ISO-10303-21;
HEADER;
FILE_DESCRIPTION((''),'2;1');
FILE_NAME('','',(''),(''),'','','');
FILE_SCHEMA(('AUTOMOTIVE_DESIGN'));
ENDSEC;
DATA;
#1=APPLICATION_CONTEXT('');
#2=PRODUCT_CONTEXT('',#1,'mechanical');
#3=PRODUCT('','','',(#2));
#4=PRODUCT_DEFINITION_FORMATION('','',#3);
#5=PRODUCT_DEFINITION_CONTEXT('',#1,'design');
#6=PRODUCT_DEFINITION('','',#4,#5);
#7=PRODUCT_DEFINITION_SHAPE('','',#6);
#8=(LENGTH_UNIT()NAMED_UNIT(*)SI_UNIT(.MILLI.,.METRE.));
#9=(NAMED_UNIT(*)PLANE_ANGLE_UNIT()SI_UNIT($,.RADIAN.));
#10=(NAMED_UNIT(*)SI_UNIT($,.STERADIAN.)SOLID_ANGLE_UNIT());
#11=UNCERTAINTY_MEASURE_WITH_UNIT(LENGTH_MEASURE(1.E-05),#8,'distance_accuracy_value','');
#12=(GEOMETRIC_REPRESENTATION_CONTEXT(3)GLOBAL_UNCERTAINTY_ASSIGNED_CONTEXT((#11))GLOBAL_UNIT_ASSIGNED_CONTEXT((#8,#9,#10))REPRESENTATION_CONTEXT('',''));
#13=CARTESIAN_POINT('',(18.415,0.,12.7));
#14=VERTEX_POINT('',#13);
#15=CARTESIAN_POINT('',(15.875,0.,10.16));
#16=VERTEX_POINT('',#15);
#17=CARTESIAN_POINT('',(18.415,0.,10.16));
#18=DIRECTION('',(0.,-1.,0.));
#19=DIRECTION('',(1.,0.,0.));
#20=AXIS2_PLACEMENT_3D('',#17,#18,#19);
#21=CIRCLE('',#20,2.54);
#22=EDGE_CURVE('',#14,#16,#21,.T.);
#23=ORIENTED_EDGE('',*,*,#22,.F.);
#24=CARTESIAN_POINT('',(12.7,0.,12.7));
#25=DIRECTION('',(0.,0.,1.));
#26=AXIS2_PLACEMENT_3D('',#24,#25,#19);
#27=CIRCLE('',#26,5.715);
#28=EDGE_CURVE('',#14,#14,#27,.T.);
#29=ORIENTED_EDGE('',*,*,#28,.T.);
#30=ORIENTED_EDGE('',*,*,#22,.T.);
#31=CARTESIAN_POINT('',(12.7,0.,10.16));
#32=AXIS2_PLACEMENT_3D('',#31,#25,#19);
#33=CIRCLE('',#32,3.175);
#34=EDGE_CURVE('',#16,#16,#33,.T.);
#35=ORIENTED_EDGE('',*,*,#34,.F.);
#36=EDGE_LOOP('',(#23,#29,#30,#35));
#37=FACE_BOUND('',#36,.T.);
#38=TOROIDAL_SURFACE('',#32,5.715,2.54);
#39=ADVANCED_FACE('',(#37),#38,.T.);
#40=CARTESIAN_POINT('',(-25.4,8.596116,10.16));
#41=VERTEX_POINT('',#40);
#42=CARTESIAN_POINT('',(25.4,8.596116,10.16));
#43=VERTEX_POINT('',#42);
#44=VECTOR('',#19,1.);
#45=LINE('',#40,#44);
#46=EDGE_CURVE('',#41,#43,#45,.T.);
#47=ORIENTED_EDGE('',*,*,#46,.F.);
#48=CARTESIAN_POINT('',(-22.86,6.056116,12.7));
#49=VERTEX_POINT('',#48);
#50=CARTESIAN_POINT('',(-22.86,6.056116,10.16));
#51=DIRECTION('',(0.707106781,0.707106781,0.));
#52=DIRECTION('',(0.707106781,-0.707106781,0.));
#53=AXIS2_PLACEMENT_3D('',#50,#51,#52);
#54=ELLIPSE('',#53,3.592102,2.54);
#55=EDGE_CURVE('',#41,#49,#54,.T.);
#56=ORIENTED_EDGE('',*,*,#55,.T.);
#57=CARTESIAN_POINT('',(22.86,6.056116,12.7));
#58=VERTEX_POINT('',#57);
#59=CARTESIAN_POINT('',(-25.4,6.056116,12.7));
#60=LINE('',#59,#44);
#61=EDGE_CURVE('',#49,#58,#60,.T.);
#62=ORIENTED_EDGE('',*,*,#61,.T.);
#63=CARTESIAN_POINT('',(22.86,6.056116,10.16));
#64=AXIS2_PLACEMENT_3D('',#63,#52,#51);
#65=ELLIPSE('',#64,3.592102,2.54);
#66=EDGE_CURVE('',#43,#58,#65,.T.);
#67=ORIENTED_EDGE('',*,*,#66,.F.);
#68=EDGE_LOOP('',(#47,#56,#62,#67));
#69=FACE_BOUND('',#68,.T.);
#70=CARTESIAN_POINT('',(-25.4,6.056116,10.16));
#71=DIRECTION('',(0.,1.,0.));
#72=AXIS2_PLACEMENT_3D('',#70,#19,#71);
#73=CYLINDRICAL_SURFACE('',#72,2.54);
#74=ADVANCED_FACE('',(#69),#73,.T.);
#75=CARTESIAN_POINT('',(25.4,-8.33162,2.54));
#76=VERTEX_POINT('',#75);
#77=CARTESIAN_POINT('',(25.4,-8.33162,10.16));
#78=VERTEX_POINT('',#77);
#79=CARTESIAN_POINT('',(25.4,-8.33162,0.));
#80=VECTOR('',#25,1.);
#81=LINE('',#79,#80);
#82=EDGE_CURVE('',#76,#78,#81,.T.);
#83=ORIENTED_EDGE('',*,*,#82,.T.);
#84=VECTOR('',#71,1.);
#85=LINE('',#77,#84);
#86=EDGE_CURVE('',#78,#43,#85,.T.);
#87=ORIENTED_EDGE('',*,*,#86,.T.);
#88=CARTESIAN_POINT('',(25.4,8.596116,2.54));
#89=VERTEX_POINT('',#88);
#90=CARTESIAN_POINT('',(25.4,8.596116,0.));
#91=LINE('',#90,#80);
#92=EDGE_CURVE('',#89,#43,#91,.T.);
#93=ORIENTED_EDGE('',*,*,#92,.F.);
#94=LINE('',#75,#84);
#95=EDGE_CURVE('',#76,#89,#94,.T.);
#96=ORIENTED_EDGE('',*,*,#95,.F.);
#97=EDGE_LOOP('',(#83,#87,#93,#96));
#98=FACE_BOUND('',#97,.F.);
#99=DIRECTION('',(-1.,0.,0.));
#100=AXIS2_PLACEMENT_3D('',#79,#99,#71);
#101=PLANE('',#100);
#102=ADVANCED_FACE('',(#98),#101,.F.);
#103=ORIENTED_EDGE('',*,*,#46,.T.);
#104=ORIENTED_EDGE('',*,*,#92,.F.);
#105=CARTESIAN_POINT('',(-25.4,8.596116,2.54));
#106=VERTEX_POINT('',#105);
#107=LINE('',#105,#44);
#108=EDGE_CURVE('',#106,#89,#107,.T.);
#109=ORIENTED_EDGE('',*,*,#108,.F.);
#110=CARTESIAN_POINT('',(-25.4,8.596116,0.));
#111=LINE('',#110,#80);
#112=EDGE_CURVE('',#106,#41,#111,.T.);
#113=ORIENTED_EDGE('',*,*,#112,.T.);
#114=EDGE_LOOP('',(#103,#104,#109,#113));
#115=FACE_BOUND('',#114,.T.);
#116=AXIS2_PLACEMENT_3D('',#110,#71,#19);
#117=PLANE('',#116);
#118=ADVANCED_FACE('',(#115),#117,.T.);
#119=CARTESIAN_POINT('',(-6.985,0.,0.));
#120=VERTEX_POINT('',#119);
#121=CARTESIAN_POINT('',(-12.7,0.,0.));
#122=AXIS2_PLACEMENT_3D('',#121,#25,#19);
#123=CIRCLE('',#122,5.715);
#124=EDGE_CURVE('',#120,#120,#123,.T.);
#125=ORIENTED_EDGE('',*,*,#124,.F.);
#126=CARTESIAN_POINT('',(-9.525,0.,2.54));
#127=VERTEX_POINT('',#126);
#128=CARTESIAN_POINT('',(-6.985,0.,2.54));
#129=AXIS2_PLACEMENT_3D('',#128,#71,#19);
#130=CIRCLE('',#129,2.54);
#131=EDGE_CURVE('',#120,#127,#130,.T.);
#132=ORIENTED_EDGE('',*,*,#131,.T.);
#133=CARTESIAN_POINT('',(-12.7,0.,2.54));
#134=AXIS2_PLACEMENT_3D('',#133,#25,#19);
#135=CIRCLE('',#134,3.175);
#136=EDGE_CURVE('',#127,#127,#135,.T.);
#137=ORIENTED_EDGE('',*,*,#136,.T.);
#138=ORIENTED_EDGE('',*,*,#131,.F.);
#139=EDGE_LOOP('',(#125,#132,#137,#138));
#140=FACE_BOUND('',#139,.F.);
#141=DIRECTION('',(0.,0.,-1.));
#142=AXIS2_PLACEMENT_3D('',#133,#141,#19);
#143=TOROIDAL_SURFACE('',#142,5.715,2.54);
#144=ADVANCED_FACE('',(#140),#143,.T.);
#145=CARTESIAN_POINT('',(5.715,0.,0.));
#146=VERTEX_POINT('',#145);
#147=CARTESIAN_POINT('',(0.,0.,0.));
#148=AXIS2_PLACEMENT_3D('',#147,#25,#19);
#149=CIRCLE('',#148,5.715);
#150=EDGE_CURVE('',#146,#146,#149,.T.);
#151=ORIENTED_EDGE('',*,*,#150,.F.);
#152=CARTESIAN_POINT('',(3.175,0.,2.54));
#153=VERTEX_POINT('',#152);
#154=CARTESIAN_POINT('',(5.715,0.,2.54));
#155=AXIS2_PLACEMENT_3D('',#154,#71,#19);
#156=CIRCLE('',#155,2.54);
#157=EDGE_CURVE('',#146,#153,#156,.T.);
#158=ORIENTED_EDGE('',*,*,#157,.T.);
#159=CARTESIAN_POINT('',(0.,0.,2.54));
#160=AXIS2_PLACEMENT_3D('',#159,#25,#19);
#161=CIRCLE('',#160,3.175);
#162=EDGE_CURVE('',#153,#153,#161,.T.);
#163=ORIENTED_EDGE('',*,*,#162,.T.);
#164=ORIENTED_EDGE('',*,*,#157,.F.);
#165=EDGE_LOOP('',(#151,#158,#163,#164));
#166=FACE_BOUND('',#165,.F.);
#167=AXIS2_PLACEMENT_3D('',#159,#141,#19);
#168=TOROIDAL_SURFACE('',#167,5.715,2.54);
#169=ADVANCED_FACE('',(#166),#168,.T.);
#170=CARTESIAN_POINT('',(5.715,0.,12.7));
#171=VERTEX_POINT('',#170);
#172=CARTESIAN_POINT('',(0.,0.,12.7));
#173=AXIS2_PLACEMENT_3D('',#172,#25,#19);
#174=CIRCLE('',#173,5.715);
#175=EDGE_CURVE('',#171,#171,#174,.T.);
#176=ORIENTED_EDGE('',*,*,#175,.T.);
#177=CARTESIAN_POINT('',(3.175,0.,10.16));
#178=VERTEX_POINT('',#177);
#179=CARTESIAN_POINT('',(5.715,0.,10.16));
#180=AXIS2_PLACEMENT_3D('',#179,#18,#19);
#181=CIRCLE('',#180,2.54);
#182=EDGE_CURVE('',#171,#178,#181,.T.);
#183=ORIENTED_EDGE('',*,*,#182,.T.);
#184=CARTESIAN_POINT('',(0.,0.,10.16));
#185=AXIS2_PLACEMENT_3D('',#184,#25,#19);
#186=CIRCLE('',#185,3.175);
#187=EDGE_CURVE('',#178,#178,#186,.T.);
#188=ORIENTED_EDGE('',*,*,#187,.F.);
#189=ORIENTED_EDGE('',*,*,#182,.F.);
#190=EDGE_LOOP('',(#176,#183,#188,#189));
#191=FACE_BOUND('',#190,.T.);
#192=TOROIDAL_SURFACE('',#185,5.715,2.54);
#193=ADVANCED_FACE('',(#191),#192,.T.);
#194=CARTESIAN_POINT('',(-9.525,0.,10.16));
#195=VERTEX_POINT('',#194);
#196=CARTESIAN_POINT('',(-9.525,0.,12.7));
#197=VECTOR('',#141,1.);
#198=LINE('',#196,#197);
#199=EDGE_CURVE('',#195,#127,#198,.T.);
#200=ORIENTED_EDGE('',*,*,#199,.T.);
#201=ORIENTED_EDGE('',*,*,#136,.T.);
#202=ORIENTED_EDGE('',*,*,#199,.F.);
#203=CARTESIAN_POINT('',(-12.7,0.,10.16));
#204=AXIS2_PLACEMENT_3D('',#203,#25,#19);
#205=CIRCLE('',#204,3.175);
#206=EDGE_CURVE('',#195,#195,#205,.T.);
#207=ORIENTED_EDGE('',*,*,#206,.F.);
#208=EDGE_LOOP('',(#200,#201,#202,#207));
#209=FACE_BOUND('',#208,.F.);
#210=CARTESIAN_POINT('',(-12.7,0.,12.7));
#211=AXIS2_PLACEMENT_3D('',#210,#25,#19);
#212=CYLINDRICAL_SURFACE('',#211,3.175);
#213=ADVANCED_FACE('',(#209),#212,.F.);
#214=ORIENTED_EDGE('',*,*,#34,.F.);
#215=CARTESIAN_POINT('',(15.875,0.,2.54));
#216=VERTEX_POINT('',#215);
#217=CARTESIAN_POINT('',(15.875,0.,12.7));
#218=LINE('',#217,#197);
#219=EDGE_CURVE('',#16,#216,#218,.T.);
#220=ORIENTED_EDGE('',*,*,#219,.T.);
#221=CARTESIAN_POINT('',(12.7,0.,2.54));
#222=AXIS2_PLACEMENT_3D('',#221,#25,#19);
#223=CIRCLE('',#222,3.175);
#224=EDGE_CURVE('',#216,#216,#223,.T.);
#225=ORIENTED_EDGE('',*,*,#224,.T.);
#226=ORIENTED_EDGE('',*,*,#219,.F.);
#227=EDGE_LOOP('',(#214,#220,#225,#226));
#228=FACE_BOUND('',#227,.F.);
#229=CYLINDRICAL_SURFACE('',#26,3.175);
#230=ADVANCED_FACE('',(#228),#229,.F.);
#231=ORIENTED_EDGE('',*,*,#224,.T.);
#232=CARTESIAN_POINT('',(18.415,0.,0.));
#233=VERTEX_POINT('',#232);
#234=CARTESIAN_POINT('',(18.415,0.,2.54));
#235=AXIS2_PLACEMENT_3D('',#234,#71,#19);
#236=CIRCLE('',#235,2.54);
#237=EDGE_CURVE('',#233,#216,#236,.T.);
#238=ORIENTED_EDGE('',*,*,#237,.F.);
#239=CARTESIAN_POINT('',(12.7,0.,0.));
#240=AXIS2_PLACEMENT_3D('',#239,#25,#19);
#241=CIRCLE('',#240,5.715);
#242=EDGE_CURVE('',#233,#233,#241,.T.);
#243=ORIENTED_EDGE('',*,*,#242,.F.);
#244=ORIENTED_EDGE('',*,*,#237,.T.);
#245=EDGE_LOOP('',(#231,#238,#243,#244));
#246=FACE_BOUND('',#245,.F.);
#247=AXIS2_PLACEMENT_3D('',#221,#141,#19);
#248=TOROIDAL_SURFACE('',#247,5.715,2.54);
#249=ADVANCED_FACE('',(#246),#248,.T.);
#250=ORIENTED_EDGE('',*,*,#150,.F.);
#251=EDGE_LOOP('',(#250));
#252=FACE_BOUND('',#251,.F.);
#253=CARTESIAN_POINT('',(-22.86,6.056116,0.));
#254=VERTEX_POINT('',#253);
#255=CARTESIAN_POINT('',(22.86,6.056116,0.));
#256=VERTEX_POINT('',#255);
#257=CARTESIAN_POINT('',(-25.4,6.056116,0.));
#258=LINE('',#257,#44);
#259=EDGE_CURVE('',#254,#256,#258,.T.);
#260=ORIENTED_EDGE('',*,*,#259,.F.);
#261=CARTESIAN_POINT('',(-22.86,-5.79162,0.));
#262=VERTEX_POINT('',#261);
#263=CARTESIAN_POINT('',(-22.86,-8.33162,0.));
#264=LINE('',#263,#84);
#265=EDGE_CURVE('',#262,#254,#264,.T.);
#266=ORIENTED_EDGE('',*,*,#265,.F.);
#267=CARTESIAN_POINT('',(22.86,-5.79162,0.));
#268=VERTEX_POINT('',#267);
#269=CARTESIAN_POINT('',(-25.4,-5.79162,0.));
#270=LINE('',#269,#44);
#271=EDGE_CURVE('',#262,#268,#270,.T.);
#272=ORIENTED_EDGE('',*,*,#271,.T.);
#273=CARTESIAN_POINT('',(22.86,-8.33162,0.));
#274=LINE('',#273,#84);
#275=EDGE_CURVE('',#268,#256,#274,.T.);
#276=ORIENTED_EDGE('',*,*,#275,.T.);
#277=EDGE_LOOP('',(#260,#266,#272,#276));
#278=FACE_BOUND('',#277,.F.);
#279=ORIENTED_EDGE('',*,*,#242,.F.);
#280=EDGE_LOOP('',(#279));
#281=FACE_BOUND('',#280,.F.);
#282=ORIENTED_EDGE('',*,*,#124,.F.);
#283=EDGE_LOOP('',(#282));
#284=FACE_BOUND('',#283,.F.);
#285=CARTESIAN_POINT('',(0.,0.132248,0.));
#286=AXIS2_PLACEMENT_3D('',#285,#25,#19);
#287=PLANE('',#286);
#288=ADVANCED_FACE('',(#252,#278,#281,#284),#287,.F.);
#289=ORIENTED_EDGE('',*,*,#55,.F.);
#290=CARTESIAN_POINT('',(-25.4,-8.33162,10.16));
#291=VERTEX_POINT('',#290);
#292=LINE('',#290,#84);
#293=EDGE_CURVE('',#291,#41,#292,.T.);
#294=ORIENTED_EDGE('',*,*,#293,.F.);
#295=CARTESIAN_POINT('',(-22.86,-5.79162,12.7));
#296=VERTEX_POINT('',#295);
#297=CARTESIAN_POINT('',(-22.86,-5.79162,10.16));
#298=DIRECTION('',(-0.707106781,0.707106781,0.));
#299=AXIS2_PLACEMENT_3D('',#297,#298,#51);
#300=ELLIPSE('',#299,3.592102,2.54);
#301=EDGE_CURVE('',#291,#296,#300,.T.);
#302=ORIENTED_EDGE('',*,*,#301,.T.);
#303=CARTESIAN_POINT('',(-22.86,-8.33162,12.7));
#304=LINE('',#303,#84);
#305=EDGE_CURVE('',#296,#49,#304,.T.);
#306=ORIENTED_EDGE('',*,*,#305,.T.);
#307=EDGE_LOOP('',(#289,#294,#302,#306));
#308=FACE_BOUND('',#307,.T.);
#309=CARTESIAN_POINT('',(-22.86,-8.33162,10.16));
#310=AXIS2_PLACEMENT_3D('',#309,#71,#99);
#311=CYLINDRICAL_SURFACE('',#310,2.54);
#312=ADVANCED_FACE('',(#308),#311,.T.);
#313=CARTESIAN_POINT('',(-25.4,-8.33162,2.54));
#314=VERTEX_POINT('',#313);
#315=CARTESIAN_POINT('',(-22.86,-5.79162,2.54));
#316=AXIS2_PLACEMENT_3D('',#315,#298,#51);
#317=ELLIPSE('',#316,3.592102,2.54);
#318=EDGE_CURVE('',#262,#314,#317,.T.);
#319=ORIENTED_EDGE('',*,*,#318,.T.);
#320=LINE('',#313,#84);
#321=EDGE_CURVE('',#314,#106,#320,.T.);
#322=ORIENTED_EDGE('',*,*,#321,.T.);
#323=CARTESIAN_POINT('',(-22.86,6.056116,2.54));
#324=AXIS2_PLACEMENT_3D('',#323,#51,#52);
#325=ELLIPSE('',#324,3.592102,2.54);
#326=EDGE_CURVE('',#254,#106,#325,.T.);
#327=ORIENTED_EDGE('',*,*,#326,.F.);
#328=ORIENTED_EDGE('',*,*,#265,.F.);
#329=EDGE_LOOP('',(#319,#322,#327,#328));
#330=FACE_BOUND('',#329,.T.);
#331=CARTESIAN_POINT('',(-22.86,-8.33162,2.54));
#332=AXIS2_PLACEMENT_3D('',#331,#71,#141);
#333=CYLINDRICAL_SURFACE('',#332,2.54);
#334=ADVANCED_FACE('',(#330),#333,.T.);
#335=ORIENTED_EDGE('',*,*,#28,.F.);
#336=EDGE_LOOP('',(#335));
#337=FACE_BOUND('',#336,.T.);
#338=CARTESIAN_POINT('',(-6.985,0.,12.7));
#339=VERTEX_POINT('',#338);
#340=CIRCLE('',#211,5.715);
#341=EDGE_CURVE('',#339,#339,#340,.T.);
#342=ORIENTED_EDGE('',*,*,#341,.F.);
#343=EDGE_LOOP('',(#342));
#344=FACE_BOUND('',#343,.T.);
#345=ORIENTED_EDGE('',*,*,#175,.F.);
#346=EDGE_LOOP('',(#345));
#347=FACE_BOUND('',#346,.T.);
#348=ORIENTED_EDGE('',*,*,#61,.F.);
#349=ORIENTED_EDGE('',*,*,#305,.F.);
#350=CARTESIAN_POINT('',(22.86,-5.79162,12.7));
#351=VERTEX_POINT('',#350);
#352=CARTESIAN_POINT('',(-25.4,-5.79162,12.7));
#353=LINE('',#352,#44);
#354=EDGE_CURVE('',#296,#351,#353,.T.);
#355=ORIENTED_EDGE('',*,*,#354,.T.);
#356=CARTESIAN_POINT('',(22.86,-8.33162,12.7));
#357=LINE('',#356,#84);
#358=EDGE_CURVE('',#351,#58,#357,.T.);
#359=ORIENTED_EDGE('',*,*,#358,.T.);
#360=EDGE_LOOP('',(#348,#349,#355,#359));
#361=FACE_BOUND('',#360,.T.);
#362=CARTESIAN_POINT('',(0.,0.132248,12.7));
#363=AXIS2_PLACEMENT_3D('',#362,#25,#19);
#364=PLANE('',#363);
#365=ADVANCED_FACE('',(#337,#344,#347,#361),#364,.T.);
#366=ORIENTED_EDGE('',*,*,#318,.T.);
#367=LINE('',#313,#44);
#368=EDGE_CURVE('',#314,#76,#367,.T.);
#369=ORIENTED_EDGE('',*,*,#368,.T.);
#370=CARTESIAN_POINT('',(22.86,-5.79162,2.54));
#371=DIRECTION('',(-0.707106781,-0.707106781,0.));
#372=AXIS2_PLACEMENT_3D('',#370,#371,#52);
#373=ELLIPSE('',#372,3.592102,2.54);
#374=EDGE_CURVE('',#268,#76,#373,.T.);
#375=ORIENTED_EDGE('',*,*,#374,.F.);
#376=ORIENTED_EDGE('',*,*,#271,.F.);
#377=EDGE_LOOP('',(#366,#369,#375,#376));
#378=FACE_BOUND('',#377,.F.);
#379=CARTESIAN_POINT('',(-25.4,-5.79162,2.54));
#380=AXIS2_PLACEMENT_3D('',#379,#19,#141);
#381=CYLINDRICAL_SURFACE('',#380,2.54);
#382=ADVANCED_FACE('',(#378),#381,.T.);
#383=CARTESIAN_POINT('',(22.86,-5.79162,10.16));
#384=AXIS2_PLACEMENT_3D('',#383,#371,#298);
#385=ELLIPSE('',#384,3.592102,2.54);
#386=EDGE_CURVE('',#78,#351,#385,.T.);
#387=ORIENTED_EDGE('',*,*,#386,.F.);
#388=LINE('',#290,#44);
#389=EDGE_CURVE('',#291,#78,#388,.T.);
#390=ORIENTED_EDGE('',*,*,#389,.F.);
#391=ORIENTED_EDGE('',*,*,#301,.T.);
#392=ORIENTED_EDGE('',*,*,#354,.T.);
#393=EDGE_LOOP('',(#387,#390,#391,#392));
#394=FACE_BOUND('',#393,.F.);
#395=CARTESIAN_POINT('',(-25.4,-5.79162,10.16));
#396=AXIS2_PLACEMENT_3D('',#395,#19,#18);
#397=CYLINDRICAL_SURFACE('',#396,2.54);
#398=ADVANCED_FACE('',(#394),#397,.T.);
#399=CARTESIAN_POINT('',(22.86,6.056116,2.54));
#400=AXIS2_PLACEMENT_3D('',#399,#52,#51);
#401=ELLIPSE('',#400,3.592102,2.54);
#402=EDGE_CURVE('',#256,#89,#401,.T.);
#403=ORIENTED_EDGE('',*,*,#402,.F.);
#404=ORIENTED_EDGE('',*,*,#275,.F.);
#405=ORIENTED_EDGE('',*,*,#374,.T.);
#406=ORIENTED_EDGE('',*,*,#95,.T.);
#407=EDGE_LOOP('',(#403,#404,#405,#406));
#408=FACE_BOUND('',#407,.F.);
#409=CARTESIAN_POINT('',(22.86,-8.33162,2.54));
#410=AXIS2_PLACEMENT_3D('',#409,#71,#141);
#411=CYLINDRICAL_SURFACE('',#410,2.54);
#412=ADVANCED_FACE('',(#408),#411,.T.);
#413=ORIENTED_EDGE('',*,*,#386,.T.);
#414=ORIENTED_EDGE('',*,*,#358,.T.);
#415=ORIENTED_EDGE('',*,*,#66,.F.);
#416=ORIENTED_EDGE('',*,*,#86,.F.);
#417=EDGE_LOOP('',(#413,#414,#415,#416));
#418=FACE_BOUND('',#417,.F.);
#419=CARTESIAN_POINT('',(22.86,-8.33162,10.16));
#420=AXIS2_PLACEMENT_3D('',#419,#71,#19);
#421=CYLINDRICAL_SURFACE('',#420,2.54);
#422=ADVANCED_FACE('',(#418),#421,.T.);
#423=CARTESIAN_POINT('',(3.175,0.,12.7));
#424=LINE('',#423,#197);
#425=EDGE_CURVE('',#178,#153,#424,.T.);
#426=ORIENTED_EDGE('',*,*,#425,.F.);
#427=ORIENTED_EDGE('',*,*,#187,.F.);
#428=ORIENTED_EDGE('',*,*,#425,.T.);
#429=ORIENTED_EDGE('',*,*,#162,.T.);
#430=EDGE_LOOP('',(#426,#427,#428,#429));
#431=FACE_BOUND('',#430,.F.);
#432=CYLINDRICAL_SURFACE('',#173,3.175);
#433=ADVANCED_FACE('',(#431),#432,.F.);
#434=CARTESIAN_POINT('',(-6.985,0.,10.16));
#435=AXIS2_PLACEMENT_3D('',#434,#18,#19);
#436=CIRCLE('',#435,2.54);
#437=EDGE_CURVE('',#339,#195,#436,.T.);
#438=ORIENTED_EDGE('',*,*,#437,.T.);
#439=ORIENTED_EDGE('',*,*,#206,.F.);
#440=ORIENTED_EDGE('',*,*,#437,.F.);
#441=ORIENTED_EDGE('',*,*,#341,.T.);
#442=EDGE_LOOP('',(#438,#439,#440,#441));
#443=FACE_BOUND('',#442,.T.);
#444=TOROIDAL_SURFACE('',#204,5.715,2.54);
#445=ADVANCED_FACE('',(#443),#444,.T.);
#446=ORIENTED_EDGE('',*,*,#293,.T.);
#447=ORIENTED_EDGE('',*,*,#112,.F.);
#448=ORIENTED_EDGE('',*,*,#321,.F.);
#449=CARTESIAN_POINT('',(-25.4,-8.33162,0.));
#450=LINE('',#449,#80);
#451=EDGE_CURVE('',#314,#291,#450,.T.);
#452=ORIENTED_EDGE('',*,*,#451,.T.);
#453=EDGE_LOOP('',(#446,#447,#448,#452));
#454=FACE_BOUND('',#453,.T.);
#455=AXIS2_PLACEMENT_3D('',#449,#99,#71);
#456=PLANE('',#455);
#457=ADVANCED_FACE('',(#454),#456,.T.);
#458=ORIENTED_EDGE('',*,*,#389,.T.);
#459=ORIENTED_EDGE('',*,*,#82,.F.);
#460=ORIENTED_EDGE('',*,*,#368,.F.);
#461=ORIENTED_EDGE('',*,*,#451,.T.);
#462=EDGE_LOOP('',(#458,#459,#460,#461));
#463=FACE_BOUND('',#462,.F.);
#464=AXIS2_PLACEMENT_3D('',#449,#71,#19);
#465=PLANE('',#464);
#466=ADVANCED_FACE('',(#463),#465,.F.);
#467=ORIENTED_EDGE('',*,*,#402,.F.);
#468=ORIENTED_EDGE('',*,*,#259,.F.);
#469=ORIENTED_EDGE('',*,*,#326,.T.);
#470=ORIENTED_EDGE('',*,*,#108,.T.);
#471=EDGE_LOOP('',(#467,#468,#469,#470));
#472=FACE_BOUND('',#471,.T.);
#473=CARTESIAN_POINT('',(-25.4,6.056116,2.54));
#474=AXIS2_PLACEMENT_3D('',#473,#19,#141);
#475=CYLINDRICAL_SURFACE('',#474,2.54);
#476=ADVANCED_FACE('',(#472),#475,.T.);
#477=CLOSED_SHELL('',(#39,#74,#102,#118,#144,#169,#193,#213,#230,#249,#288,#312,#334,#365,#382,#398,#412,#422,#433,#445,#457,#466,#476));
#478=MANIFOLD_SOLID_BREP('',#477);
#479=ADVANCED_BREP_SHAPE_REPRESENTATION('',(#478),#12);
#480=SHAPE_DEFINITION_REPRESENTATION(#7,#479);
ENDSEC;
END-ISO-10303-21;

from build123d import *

# Parameters (mm, degrees)
F0_W     = 50.8
F0_H     = 16.92773588
F1_DEPTH = 12.7
F2_R     = 3.175
F3_DEPTH = 25.4
F4_R     = 2.54
F5_R     = 2.54


with BuildPart() as f1:
    # F0 (on Top) → F1 (new body)
    with BuildSketch(Plane.XY):
        with Locations((0, 0.1322478056)):
            Rectangle(F0_W, F0_H)
    extrude(amount=F1_DEPTH)

    # F2 (on face) → F3 (cut)
    with BuildSketch(Plane.XY.offset(12.7)):
        with Locations((-12.7, 0)):
            Circle(F2_R)
        Circle(F2_R)
        with Locations((12.7, 0)):
            Circle(F2_R)
    extrude(amount=-F3_DEPTH, mode=Mode.SUBTRACT)

    # F4
    f4_edges = [f1.edges().sort_by_distance(p)[0] for p in [
        (-15.875, 0, 12.7),
        (-3.175, 0, 12.7),
        (9.525, 0, 12.7),
        (-15.875, 0, 0),
        (-3.175, 0, 0),
        (9.525, 0, 0),
    ]]
    fillet(f4_edges, radius=F4_R)

    # F5
    f5_edges = [f1.edges().sort_by_distance(p)[0] for p in [
        (0, 8.596116, 12.7),
        (25.4, 0.132248, 12.7),
        (0, -8.33162, 12.7),
        (-25.4, 0.132248, 12.7),
        (0, 8.596116, 0),
        (-25.4, 0.132248, 0),
        (0, -8.33162, 0),
        (25.4, 0.132248, 0),
    ]]
    fillet(f5_edges, radius=F5_R)


solid = f1.part
